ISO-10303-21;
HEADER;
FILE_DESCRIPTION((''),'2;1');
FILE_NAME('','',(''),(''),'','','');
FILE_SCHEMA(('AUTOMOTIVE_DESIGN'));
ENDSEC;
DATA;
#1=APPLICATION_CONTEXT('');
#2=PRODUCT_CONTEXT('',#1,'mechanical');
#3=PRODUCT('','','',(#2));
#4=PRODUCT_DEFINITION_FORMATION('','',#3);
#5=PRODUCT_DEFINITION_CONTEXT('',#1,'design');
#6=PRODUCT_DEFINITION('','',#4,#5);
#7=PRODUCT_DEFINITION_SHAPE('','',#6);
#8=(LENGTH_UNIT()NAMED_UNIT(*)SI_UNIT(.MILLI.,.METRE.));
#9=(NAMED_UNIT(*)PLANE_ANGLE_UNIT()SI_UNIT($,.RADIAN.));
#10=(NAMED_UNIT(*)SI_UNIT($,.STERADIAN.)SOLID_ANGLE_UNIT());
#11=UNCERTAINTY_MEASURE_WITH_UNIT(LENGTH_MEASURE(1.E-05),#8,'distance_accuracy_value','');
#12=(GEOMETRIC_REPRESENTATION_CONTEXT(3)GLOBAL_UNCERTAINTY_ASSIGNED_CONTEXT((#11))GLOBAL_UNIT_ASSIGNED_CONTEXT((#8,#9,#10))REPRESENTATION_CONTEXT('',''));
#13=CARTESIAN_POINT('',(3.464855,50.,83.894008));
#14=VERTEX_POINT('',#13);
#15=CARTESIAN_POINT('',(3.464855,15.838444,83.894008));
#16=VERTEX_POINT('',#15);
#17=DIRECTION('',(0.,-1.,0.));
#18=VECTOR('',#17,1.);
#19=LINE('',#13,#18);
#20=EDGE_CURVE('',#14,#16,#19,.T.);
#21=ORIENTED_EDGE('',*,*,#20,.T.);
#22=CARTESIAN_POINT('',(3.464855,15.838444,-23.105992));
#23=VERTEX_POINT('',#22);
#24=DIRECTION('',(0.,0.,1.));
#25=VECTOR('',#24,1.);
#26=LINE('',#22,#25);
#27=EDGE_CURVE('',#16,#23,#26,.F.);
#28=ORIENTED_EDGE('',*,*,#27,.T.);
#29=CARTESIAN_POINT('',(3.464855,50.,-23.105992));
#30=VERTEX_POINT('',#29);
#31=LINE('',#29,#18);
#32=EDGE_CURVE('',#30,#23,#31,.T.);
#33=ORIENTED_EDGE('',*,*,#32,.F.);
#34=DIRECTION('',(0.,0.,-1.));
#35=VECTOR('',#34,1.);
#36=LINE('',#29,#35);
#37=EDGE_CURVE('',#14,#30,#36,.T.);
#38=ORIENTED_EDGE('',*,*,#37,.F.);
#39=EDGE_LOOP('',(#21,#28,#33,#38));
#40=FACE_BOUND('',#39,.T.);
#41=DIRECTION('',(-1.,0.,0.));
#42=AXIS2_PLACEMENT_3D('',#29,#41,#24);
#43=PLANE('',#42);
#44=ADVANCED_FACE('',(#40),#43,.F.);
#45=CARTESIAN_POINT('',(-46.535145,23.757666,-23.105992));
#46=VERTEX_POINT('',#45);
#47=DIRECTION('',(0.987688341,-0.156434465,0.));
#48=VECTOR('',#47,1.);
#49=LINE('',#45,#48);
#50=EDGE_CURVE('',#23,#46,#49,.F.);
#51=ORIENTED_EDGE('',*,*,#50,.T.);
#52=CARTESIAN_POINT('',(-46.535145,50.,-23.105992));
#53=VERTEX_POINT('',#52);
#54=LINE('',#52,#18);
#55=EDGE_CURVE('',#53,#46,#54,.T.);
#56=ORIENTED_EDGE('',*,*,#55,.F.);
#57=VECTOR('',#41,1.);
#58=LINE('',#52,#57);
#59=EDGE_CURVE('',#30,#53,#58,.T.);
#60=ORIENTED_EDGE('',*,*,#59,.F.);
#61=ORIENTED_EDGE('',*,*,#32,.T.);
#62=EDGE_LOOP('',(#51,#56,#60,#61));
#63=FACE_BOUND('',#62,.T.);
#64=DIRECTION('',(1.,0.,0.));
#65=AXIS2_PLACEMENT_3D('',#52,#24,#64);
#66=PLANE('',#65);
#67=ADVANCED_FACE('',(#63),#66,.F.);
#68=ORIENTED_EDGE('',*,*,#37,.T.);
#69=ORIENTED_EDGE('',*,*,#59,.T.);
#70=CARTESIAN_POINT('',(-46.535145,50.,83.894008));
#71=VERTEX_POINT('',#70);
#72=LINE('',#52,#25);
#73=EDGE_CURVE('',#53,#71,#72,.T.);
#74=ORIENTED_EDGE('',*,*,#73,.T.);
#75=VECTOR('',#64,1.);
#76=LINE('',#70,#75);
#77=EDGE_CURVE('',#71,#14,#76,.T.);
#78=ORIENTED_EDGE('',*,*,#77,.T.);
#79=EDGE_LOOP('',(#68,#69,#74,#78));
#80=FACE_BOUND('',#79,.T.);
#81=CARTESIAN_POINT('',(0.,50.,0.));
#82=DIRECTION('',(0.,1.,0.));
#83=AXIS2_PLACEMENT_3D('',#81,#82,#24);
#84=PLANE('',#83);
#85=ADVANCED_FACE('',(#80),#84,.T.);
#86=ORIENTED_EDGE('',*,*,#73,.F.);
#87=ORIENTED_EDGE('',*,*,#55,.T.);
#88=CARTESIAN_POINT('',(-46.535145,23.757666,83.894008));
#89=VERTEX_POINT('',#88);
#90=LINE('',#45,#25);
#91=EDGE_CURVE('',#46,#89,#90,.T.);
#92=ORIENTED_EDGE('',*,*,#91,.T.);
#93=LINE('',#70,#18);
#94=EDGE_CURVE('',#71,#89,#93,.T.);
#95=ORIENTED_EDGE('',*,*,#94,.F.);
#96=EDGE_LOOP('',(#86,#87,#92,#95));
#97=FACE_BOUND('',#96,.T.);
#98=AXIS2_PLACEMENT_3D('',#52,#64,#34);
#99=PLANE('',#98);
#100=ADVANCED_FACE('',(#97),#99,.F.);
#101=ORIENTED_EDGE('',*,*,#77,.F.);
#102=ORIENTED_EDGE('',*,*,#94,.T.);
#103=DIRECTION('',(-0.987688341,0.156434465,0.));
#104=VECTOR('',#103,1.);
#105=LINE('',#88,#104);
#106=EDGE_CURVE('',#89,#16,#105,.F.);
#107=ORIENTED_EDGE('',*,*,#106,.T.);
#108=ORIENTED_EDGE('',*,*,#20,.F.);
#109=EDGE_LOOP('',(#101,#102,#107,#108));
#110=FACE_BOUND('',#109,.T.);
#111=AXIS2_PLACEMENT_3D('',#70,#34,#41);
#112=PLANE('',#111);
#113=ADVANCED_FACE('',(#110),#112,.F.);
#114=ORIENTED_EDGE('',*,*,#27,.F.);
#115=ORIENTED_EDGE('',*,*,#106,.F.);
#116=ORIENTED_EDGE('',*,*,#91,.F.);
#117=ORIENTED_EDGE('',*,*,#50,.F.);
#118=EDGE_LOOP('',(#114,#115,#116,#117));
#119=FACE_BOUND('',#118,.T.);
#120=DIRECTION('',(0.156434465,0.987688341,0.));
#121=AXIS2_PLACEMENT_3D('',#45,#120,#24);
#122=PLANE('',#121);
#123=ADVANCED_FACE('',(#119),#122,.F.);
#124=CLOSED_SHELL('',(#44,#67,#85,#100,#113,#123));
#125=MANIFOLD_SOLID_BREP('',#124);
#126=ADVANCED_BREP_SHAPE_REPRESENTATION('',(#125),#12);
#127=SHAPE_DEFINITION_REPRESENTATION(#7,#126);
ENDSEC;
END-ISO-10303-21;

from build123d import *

# Parameters (mm, degrees)
SKETCH_1_W       = 50
SKETCH_1_H       = 107
EXTRUDE_1_DEPTH  = 50
CHAMFER_1_SIZE   = 23.757666049
CHAMFER_1_SIZE_2 = 150


with BuildPart() as part:
    # 草图1 → 凸台-拉伸1 (new body)
    with BuildSketch(Plane(origin=(0, 0, 0), x_dir=(1, 0, 0), z_dir=(0, 1, 0))):
        with Locations((-21.53514466, -30.394008033)):
            Rectangle(SKETCH_1_W, SKETCH_1_H)
    extrude(amount=EXTRUDE_1_DEPTH)

    # 倒角1
    # the kernel refuses this chamfer: 150, 23.757666049 mm, written as the material it takes off along each edge
    with BuildSketch(Plane(origin=(-46.53514466, 0, 473.716395579), x_dir=(-0.2333366369919579, 0.9723960169793392, 0), z_dir=(0, 0, -1))) as chamfer_1_piece_1:
        Polygon((CHAMFER_1_SIZE * 0.972396016966, CHAMFER_1_SIZE * 0.233336636989), (-CHAMFER_1_SIZE_2 * 0.233336636992, CHAMFER_1_SIZE_2 * 0.972396016979), (0, 0), align=None)
    extrude(amount=886.644775091, mode=Mode.SUBTRACT)


solid = part.part
